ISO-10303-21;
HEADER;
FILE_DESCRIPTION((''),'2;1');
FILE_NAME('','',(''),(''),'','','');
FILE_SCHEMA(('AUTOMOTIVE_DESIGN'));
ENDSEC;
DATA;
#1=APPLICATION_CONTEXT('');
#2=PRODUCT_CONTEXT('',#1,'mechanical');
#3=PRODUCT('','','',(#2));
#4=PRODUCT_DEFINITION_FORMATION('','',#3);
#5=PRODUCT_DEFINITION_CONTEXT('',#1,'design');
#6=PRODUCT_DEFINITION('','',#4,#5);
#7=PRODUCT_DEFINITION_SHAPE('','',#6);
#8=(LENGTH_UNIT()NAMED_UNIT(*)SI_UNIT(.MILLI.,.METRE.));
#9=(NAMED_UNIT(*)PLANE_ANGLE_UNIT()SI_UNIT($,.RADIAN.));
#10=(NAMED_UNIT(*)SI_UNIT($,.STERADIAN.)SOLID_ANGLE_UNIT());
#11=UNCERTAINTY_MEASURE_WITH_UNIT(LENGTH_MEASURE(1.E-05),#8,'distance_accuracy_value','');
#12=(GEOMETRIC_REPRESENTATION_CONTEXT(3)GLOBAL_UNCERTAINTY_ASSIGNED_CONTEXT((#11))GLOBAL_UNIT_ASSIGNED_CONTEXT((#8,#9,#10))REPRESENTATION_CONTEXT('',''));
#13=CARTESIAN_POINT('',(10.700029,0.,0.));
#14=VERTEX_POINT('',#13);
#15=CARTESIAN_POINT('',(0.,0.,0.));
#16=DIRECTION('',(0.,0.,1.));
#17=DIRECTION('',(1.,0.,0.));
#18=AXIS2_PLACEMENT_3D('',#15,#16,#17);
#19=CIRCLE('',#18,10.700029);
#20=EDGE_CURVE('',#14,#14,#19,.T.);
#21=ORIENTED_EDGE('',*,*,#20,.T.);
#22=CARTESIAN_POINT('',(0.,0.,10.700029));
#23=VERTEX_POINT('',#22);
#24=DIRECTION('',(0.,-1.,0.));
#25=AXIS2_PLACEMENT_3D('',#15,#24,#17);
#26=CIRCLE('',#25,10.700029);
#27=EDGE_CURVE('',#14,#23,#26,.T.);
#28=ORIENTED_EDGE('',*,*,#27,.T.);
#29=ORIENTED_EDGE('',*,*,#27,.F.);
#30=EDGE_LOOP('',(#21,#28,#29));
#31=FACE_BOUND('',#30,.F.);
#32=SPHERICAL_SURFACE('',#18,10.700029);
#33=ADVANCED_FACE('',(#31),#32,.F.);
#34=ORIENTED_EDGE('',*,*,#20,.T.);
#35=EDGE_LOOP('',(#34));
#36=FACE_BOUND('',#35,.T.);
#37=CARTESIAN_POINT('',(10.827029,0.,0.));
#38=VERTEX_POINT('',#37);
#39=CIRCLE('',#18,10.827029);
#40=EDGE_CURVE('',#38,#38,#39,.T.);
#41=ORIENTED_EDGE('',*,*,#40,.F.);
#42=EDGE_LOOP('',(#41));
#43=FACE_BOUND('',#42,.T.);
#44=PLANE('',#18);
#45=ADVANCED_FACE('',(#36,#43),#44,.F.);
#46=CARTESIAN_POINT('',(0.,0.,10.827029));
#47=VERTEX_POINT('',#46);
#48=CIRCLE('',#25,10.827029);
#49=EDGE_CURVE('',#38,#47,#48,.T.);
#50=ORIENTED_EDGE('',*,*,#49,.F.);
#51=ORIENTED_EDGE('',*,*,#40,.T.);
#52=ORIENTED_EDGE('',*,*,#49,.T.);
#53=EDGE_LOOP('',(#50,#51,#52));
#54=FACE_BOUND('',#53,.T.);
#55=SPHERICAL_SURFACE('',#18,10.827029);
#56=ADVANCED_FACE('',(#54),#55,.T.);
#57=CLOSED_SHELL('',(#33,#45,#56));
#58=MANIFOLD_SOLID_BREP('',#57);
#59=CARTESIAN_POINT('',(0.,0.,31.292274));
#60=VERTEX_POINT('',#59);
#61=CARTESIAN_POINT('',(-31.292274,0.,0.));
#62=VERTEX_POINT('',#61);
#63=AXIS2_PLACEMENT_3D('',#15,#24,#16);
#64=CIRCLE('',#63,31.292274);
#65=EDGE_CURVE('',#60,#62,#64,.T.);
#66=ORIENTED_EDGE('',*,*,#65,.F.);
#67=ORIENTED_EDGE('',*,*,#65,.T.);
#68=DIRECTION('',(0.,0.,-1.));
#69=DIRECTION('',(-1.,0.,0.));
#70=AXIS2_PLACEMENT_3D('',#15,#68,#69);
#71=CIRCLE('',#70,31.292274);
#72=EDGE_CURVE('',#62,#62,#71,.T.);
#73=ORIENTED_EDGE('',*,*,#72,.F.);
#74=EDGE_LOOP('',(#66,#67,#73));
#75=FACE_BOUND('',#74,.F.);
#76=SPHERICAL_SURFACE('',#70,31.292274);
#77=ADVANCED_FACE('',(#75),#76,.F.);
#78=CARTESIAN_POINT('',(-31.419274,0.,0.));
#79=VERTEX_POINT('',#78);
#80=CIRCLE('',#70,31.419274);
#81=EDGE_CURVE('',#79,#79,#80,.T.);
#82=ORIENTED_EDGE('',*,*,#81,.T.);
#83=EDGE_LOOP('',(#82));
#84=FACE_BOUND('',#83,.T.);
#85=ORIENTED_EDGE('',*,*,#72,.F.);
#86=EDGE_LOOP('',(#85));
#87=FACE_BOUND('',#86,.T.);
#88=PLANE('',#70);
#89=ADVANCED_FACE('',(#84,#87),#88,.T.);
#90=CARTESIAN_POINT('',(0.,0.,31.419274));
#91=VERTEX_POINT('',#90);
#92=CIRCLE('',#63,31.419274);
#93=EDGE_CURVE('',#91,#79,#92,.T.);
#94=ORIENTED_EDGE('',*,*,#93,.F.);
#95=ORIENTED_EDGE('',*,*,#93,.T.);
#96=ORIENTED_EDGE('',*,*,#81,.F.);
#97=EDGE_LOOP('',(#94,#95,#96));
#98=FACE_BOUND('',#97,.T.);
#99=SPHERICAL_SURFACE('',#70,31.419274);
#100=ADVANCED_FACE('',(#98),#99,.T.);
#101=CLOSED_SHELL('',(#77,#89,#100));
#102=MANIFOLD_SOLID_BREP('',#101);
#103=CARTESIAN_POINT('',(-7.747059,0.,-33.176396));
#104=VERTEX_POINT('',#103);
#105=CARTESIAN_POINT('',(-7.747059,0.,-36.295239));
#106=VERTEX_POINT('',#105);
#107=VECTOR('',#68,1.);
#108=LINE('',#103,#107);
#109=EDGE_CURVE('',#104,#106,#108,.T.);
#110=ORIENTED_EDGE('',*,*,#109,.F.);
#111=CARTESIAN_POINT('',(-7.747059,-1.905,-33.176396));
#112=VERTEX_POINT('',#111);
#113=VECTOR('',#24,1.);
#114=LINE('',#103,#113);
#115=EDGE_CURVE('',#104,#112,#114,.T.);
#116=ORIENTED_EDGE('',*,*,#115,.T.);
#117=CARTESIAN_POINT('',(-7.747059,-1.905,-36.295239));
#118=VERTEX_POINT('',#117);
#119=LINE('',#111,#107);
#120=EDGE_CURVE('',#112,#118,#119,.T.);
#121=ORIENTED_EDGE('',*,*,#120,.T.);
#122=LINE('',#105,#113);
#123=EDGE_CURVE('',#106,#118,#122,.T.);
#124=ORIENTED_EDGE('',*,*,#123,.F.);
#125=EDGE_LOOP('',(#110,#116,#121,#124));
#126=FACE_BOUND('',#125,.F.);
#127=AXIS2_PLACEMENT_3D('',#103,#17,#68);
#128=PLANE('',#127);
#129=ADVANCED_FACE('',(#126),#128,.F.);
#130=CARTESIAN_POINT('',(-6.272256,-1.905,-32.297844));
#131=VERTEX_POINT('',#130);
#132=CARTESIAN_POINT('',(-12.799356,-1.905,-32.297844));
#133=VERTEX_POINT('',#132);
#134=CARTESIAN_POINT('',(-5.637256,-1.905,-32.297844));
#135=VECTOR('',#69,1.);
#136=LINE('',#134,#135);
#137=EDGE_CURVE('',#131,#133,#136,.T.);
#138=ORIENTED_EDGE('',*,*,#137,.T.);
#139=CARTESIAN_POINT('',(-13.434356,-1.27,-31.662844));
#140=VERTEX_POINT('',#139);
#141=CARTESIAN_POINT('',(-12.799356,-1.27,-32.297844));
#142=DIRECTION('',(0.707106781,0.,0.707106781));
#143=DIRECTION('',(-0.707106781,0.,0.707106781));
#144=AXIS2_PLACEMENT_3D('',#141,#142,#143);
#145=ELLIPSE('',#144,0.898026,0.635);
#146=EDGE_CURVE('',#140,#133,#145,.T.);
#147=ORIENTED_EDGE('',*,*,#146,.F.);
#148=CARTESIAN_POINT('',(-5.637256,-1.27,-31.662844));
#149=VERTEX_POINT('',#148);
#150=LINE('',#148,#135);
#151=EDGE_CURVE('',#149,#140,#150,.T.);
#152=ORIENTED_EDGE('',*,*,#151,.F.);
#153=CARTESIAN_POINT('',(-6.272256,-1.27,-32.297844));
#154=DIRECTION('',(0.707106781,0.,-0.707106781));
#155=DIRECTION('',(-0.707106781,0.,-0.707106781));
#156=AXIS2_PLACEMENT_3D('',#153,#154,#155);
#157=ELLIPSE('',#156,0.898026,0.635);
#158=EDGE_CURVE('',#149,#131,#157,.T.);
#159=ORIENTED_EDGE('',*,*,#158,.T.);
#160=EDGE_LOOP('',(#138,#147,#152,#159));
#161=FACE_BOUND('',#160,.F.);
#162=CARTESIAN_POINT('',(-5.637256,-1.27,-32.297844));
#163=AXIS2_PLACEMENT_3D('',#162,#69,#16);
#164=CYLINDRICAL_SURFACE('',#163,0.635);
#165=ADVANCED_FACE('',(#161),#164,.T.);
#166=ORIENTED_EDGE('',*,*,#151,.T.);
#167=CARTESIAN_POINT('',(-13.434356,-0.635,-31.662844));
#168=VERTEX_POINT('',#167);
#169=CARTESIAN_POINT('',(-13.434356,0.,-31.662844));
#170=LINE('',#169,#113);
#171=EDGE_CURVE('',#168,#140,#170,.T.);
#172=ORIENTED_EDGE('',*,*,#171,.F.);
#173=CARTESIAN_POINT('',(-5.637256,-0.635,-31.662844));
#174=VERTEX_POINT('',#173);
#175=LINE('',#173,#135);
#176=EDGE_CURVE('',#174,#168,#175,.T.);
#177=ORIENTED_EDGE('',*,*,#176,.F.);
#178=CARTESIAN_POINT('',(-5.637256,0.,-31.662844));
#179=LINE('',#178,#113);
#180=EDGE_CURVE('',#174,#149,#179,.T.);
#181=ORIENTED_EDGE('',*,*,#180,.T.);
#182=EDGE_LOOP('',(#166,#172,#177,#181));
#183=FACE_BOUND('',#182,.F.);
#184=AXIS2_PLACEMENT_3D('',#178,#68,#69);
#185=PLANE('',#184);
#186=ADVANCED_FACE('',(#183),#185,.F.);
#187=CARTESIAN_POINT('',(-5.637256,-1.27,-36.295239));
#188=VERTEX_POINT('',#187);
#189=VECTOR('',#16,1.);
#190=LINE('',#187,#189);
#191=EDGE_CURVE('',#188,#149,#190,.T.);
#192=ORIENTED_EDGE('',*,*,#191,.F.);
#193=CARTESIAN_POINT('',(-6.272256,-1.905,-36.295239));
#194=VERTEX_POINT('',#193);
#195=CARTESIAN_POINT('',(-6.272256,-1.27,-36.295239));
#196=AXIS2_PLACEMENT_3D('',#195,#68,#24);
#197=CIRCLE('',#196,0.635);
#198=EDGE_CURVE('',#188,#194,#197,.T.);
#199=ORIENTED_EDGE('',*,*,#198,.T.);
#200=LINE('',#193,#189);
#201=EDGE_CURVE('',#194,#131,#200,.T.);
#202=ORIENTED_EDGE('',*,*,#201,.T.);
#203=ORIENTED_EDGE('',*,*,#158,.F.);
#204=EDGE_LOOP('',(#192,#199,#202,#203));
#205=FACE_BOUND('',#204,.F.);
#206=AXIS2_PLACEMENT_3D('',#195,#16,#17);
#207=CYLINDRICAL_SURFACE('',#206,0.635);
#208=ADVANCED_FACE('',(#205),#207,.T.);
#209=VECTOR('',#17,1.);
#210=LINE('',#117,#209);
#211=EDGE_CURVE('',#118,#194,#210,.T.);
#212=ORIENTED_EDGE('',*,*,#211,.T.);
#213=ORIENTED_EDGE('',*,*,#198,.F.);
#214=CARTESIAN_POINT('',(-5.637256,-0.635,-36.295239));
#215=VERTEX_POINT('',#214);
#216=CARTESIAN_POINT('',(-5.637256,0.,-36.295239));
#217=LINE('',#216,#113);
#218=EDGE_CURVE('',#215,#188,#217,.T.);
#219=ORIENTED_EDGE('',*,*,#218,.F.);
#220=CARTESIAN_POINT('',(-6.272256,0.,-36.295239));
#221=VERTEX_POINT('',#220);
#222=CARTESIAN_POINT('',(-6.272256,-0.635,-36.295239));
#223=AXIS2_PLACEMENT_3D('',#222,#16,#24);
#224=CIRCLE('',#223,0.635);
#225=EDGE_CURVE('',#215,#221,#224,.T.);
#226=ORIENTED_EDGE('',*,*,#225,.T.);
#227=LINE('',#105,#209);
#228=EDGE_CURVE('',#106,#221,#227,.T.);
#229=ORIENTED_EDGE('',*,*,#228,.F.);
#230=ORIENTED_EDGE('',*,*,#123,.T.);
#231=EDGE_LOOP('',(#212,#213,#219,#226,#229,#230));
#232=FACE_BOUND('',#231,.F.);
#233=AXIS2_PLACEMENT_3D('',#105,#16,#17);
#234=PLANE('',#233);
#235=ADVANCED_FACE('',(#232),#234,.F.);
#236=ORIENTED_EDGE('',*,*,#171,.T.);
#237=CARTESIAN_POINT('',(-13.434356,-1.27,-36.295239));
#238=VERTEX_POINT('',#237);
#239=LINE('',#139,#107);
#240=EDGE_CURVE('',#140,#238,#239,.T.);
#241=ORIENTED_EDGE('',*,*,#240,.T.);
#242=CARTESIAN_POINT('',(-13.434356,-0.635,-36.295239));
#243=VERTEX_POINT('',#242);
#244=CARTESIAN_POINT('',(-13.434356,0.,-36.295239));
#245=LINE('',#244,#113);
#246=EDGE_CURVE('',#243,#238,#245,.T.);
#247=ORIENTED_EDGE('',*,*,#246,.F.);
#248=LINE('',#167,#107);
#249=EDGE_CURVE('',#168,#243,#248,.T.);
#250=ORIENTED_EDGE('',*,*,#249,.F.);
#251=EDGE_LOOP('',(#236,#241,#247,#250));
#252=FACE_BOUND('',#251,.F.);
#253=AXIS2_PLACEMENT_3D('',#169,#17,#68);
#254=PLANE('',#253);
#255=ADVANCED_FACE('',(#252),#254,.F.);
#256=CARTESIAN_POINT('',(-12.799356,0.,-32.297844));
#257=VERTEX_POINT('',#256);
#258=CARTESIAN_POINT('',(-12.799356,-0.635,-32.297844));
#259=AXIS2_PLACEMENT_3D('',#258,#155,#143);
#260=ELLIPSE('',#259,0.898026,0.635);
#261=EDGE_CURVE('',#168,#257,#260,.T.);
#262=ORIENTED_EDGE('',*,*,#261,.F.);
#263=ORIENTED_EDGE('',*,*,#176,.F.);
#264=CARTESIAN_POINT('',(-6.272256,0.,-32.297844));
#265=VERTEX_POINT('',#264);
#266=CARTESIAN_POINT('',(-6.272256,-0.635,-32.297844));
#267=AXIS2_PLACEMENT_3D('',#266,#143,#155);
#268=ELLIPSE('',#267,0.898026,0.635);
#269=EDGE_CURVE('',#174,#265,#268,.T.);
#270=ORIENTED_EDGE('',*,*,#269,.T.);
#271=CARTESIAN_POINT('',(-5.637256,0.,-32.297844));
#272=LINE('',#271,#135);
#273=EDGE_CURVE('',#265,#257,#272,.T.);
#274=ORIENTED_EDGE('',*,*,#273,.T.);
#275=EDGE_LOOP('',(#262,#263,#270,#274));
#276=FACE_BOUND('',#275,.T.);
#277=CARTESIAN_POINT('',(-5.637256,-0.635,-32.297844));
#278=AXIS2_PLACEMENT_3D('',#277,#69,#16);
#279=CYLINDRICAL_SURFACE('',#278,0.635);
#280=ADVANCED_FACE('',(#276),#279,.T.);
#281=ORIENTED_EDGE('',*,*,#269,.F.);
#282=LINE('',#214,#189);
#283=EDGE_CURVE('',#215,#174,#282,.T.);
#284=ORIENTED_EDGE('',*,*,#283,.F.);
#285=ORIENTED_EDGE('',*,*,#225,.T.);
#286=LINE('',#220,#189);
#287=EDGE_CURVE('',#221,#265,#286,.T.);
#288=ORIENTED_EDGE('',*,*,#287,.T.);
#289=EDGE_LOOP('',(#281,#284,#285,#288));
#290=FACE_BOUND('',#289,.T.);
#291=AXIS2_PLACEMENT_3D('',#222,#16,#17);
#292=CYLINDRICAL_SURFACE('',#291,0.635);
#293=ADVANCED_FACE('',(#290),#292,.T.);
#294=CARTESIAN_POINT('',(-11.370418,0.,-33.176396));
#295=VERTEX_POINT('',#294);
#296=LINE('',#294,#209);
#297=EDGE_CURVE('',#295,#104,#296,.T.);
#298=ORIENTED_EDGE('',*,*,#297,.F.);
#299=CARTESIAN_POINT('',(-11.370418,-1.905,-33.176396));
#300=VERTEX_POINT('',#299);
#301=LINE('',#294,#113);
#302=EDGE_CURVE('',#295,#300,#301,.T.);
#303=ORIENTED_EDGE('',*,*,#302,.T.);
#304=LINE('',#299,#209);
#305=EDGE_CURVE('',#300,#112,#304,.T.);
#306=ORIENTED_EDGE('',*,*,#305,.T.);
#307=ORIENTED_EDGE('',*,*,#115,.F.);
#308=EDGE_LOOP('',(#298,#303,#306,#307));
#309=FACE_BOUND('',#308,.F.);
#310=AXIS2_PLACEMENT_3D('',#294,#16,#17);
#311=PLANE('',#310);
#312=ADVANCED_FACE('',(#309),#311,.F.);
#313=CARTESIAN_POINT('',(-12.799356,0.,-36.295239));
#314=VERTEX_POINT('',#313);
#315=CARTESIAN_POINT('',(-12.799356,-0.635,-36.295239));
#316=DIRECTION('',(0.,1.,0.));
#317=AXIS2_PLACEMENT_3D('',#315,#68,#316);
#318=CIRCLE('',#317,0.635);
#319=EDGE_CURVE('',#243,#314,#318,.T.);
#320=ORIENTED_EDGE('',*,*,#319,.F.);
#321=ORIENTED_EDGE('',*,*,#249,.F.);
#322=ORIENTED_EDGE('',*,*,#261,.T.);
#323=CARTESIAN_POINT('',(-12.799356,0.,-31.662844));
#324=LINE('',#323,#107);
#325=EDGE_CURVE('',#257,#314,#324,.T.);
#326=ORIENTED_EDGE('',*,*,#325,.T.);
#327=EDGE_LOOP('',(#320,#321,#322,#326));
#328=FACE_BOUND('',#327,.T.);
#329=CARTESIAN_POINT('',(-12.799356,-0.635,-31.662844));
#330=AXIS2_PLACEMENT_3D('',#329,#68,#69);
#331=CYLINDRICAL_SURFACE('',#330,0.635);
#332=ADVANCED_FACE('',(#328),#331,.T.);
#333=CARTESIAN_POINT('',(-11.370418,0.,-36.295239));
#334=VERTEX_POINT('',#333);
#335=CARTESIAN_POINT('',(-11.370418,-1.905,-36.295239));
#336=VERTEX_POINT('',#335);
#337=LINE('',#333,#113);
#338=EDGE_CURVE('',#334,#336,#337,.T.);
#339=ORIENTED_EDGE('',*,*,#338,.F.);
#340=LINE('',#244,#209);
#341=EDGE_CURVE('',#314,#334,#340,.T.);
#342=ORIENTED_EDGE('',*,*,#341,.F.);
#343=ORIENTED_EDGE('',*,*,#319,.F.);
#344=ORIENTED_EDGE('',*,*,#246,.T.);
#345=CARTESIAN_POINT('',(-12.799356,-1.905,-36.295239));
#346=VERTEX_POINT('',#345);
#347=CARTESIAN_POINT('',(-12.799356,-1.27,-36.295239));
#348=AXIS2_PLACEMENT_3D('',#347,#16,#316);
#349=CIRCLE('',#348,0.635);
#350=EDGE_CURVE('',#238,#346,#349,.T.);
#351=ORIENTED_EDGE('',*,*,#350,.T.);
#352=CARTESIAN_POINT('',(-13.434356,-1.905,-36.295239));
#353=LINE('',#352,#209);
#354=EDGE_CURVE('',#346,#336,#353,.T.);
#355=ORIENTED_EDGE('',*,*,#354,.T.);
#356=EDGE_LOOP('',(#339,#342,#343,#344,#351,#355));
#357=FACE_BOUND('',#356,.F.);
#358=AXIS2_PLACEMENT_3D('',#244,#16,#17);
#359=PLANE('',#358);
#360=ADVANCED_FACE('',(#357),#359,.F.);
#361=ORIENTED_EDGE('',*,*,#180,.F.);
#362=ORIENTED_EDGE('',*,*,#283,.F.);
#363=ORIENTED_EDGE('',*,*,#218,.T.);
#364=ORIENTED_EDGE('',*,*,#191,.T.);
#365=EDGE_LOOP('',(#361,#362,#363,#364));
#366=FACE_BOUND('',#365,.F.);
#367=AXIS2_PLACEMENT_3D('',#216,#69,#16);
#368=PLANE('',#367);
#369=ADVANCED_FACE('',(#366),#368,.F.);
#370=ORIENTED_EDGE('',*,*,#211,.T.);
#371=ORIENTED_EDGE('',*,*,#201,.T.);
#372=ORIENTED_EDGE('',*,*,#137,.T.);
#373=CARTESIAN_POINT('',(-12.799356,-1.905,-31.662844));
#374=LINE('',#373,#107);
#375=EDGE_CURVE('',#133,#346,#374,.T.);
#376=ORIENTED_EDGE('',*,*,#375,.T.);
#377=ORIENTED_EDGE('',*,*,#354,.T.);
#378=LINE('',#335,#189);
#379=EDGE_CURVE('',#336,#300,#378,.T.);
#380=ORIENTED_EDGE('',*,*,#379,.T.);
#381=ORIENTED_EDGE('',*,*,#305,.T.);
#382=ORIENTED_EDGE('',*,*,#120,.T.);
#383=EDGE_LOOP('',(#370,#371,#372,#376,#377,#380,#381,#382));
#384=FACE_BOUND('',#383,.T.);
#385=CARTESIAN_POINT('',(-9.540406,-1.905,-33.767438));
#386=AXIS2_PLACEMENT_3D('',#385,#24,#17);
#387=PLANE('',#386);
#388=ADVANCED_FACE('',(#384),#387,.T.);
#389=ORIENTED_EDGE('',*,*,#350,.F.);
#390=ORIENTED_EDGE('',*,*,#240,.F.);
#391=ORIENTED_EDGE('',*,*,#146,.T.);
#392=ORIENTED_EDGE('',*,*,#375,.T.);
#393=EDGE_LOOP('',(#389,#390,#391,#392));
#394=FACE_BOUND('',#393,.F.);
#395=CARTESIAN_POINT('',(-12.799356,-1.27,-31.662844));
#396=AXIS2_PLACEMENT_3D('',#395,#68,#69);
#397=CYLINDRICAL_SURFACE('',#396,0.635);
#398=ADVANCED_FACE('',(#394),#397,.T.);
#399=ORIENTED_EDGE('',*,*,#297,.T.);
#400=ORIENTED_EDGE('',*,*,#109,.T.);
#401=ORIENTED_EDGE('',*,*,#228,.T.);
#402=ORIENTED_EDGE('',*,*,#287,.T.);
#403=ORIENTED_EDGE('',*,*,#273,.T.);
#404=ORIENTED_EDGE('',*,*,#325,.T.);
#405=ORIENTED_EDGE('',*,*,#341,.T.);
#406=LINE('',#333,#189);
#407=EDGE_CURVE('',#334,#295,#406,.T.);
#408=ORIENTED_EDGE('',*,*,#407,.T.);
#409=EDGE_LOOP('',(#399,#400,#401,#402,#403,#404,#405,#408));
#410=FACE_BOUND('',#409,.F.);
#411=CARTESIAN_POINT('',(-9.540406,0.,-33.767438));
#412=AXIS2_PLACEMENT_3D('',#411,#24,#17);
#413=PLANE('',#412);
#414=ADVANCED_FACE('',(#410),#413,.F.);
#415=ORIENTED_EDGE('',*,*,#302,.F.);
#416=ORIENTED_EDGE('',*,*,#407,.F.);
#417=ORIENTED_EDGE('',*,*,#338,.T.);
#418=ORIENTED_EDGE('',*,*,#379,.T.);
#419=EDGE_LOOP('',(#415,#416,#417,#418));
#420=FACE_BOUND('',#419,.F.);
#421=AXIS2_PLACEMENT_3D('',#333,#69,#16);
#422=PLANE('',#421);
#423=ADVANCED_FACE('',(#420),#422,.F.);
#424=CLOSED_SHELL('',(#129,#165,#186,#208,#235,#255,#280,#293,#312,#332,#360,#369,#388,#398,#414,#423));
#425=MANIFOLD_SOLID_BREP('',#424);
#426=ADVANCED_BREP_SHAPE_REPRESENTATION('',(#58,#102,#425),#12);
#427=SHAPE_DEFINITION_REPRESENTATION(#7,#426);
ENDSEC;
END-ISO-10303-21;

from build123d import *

# Parameters (mm, degrees)
F2_T     = -0.127
F5_T     = -0.127
F9_DEPTH = 1.905
F10_R    = 0.635


# Not quite as in the source:
# - the program builds the solid bodies; features that only make, move or delete a surface that nothing else refers to are left out


with BuildPart() as f1:
    # F0 (on Front) → F1 (revolve)
    with BuildSketch(Plane.XZ):
        with BuildLine():
            Line((0, 0), (0, 31.419273907))
            ThreePointArc((0, 31.419273907), (-22.2167816396, 22.2167816396), (-31.419273907, 0))
            Line((-31.419273907, 0), (0, 0))
        make_face()
    revolve(axis=Axis((0, 0, 0), (0, 0, -1)))

    # F2
    f2_openings = [f1.faces().sort_by_distance(p)[0] for p in [
        (0, 0, 0),
    ]]
    offset(amount=F2_T, openings=f2_openings)


with BuildPart() as f4:
    # F3 (on Front) → F4 (revolve)
    with BuildSketch(Plane.XZ):
        with BuildLine():
            Line((0, 0), (10.8270294, 0))
            ThreePointArc((10.8270294, 0), (7.6558659088, 7.6558659088), (0, 10.8270294))
            Line((0, 10.8270294), (0, 0))
        make_face()
    revolve(axis=Axis((0, 0, 5.4135147), (0, 0, 1)))

    # F5
    f5_openings = [f4.faces().sort_by_distance(p)[0] for p in [
        (0, 0, 0),
    ]]
    offset(amount=F5_T, openings=f5_openings)


with BuildPart() as f9:
    # F8 (on Front) → F9 (new body)
    with BuildSketch(Plane.XZ):
        Polygon((-13.4343560785, -31.6628441215), (-13.4343560785, -36.2952388823), (-11.370417662, -36.2952388823), (-11.370417662, -33.1763960421), (-7.7470592223, -33.1763960421), (-7.7470592223, -36.2952388823), (-5.6372559629, -36.2952388823), (-5.6372559629, -31.6628441215), align=None)
    extrude(amount=F9_DEPTH)

    # F10
    f10_edges = [f9.edges().sort_by_distance(p)[0] for p in [
        (-9.535806, -1.905, -31.662844),
        (-9.535806, 0, -31.662844),
        (-5.637256, -1.905, -33.979042),
        (-5.637256, 0, -33.979042),
        (-13.434356, 0, -33.979042),
        (-13.434356, -1.905, -33.979042),
    ]]
    fillet(f10_edges, radius=F10_R)


solid = Compound([f1.part, f4.part, f9.part])
